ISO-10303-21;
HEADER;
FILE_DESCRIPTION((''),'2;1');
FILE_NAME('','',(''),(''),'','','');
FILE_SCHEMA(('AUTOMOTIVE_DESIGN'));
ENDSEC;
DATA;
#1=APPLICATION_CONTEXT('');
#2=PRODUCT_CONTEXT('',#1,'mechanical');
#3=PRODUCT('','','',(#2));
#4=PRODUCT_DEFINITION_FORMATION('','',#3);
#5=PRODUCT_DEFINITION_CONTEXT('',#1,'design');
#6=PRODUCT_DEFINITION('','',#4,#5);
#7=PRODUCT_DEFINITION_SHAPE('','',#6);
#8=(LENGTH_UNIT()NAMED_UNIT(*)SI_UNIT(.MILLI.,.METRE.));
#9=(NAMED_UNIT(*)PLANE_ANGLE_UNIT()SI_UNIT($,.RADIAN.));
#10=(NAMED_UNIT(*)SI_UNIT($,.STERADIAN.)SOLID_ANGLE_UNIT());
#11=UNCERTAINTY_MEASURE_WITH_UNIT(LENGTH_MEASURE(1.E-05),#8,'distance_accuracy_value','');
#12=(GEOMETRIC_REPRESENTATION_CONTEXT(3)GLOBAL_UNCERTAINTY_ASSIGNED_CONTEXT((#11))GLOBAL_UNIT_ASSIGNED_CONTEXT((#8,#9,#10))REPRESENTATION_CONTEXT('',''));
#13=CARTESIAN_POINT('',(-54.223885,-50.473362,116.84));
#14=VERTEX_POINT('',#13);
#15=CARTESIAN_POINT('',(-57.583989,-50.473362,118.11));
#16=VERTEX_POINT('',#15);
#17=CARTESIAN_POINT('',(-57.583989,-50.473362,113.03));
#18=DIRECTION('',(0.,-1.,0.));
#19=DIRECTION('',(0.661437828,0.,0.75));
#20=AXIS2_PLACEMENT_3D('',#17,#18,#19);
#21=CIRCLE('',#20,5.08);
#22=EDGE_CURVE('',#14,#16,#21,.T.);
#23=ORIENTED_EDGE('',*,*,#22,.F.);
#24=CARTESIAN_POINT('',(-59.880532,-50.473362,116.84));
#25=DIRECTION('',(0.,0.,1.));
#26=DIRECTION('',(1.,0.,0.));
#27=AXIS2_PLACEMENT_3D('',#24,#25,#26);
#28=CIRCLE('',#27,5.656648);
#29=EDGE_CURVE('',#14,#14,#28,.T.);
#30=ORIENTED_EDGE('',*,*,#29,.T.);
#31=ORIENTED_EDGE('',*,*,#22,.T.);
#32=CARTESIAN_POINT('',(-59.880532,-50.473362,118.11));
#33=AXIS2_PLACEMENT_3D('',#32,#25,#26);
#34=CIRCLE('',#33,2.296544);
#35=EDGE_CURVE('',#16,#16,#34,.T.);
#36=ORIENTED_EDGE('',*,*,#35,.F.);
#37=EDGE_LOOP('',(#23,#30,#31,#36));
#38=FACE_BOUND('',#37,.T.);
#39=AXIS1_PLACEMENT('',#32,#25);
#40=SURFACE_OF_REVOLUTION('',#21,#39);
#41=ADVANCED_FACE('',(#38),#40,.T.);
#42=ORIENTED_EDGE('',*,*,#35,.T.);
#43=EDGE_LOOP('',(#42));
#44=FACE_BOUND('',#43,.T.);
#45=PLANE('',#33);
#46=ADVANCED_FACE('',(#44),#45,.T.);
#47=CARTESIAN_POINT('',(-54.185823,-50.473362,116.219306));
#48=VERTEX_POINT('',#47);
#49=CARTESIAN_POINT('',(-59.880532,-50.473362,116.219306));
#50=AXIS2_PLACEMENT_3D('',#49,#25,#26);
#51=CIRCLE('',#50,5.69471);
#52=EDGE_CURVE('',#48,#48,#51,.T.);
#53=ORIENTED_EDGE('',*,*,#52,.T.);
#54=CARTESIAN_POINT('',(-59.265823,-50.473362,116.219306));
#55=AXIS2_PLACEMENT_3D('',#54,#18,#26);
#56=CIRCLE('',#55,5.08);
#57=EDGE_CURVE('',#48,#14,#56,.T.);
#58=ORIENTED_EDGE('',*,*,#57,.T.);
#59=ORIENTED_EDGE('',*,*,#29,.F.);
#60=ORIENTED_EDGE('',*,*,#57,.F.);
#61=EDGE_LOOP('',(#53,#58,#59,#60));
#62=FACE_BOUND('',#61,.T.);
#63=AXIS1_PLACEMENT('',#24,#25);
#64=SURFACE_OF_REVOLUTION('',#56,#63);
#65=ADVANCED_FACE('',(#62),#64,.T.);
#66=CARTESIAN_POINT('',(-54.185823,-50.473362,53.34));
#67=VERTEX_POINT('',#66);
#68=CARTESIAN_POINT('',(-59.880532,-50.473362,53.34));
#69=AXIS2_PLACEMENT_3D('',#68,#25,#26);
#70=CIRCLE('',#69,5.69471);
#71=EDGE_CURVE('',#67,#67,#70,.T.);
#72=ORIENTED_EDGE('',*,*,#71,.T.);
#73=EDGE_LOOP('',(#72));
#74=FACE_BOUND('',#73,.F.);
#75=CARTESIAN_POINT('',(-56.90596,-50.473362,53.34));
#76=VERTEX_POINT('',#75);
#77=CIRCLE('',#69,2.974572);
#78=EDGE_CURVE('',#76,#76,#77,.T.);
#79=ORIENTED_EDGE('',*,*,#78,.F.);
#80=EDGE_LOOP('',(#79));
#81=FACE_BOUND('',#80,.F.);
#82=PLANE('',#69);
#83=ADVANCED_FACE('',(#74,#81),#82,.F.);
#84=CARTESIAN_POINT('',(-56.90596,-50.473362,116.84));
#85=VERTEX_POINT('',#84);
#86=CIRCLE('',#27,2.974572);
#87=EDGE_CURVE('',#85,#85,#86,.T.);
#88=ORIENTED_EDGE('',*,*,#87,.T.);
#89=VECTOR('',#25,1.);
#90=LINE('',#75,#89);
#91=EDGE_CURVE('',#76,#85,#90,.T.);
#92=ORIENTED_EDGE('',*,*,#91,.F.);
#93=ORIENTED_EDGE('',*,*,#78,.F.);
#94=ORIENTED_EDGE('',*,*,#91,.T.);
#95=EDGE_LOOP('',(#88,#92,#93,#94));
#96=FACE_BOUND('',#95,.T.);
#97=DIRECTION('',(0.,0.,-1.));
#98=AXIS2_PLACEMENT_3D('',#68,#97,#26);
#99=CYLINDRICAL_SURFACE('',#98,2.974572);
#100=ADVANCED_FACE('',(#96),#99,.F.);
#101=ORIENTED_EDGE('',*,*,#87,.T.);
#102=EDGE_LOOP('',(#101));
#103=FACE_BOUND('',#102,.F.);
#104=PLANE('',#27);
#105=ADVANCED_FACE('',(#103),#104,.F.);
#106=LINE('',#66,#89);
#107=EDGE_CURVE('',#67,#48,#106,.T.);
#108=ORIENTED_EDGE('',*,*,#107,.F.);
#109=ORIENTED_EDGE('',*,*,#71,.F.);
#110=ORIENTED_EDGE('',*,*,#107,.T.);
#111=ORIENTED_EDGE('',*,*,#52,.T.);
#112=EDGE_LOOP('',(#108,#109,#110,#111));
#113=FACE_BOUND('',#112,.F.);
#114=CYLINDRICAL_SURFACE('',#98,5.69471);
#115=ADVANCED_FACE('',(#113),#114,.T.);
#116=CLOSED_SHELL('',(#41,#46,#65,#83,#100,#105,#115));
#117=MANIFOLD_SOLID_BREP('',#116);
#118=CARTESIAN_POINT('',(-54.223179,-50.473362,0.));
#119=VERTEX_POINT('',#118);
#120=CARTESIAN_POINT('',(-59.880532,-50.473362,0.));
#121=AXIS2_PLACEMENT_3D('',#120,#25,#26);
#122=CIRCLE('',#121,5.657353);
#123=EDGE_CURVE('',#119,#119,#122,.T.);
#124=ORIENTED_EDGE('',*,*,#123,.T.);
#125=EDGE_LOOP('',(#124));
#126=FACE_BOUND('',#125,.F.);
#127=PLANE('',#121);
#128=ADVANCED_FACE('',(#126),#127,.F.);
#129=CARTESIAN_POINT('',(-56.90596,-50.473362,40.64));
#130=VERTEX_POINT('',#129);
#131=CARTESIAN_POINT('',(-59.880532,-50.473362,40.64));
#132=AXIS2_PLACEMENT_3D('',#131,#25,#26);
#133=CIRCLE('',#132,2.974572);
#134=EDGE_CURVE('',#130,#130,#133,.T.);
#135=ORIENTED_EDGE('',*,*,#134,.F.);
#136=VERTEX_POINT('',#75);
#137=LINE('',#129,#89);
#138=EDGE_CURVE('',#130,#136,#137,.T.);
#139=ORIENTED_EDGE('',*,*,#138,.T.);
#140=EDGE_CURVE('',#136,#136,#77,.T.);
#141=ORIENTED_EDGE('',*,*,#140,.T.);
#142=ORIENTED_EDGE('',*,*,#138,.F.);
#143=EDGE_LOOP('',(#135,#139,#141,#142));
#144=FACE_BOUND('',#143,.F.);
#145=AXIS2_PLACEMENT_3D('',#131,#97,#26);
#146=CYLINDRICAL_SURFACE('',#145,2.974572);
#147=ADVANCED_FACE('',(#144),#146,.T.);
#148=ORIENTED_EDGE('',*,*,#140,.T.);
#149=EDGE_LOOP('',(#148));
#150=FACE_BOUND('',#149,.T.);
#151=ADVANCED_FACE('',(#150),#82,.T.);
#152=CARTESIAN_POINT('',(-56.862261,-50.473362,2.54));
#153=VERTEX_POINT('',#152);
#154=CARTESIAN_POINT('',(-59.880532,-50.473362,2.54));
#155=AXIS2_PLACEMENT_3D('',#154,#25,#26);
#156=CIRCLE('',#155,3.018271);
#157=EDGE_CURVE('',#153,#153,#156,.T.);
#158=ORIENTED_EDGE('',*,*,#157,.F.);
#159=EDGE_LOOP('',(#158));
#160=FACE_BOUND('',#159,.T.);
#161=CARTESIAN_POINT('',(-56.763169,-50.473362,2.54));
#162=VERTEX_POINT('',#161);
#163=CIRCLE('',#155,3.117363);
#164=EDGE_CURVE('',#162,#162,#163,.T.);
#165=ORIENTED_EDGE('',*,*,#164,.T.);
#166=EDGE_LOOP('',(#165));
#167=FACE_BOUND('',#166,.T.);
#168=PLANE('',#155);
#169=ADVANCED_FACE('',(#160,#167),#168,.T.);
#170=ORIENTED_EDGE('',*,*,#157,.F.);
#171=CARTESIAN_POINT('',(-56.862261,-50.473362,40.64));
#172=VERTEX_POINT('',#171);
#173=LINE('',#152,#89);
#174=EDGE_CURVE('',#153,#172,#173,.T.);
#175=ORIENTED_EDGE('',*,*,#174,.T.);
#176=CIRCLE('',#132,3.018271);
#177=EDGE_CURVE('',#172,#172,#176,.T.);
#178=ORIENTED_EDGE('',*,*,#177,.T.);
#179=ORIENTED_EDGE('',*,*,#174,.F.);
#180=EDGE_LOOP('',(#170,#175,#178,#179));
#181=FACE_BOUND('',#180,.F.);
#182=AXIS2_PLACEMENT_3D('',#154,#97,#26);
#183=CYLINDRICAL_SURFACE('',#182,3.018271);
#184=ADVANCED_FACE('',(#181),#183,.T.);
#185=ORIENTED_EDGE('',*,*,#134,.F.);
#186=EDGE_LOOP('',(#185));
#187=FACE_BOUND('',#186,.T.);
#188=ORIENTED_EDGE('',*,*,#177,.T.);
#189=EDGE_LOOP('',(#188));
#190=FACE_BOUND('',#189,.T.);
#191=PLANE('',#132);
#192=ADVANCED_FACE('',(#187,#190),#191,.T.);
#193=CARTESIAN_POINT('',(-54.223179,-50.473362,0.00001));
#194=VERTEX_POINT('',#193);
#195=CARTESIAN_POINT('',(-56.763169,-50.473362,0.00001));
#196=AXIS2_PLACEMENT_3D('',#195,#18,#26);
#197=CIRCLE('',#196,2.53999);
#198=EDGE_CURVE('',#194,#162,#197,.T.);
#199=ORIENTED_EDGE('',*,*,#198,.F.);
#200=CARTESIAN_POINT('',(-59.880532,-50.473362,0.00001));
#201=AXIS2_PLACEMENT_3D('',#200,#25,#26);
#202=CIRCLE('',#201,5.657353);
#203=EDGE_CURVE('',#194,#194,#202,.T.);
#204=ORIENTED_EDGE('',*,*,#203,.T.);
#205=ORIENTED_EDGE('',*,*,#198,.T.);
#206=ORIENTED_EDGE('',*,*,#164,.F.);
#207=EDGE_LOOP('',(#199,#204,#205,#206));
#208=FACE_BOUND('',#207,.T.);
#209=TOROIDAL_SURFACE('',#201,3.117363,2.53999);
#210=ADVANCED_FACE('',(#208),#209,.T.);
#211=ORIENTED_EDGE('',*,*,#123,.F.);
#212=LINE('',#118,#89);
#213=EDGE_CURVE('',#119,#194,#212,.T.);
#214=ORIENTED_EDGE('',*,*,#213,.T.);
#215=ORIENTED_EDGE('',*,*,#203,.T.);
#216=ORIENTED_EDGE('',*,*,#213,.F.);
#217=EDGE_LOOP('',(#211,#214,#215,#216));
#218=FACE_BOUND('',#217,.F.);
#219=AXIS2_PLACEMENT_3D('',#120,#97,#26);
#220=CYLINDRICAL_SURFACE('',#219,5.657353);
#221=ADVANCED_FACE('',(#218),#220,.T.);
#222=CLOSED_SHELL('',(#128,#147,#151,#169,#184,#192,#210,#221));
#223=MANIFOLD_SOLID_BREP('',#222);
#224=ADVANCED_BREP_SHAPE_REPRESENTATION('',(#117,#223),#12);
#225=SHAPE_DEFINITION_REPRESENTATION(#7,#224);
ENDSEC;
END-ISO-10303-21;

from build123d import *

# Parameters (mm, degrees)
F0_R      = 5.6573529482
F1_DEPTH  = 2.54
F2_R      = 2.53999
F3_R      = 3.0182712291
F4_DEPTH  = 38.1
F5_R      = 2.9745722731
F6_DEPTH  = 12.7
F7_R      = 5.6947098188
F7_R_2    = 2.9745722731
F8_DEPTH  = 63.5
F10_R     = 5.6566477781
F11_DEPTH = 1.27


# Not quite as in the source:
# - a fillet or chamfer that OpenCascade refuses, or shapes differently, is made with other operations: its cross-section is extruded or revolved along the edge and cut away or added
# - a fillet or chamfer is up to 0.001 mm smaller than in the source, because OpenCascade refuses the exact size
# - the program builds the solid bodies; features that only make, move or delete a surface that nothing else refers to are left out


with BuildPart() as f1:
    # F0 (on Top) → F1 (new body)
    with BuildSketch(Plane.XY):
        with Locations((-59.8805323243, -50.4733622074)):
            Circle(F0_R)
    extrude(amount=F1_DEPTH)

    # F2 (radius 2.54 in the source; OpenCascade refuses exactly that, so slightly less here)
    f2_edges = [f1.edges().sort_by_distance(p)[0] for p in [
        (-65.537885, -50.473362, 2.54),
    ]]
    fillet(f2_edges, radius=F2_R)

    # F3 (on face) → F4 (join)
    with BuildSketch(Plane.XY.offset(2.54)):
        with Locations((-59.8805323243, -50.4733622074)):
            Circle(F3_R)
    extrude(amount=F4_DEPTH)

    # F5 (on face) → F6 (join)
    with BuildSketch(Plane.XY.offset(40.64)):
        with Locations((-59.8805323243, -50.4733622074)):
            Circle(F5_R)
    extrude(amount=F6_DEPTH)


with BuildPart() as f8:
    # F7 (on face) → F8 (new body)
    with BuildSketch(Plane.XY.offset(53.34)):
        with Locations((-59.8805323243, -50.4733622074)):
            Circle(F7_R)
        with Locations((-59.8805323243, -50.4733622074)):
            Circle(F7_R_2, mode=Mode.SUBTRACT)
    extrude(amount=F8_DEPTH)

    # F10 (on face) → F11 (join)
    with BuildSketch(Plane.XY.offset(116.84)):
        with Locations((-59.8805323243, -50.4733622074)):
            Circle(F10_R)
    extrude(amount=F11_DEPTH)

    # F12: fillet of radius 5.08 on 2 edges, made by hand

    # F12_s1 → F12_t2 (revolve, cut)
    with BuildSketch(Plane.XZ.offset(50.4733622074)):
        with BuildLine():
            ThreePointArc((-54.2238845462, 116.84), (-55.7879374871, 117.7819048812), (-57.5839887113, 118.11))
            Line((-57.5839887113, 118.11), (-54.2238845462, 118.11))
            Line((-54.2238845462, 118.11), (-54.2238845462, 116.84))
        make_face()
    revolve(axis=Axis((-59.8805323243, -50.4733622074, 118.11), (0, 0, 1)), mode=Mode.SUBTRACT)

    # F12_s3 → F12_t4 (revolve, cut)
    with BuildSketch(Plane.XZ.offset(50.4733622074)):
        with BuildLine():
            ThreePointArc((-54.1858225055, 116.2193055383), (-54.1953469443, 116.5302357289), (-54.2238845462, 116.84))
            Line((-54.2238845462, 116.84), (-54.1858225055, 116.84))
            Line((-54.1858225055, 116.84), (-54.1858225055, 116.2193055383))
        make_face()
    revolve(axis=Axis((-59.8805323243, -50.4733622074, 116.84), (0, 0, 1)), mode=Mode.SUBTRACT)


solid = Compound([f1.part, f8.part])
